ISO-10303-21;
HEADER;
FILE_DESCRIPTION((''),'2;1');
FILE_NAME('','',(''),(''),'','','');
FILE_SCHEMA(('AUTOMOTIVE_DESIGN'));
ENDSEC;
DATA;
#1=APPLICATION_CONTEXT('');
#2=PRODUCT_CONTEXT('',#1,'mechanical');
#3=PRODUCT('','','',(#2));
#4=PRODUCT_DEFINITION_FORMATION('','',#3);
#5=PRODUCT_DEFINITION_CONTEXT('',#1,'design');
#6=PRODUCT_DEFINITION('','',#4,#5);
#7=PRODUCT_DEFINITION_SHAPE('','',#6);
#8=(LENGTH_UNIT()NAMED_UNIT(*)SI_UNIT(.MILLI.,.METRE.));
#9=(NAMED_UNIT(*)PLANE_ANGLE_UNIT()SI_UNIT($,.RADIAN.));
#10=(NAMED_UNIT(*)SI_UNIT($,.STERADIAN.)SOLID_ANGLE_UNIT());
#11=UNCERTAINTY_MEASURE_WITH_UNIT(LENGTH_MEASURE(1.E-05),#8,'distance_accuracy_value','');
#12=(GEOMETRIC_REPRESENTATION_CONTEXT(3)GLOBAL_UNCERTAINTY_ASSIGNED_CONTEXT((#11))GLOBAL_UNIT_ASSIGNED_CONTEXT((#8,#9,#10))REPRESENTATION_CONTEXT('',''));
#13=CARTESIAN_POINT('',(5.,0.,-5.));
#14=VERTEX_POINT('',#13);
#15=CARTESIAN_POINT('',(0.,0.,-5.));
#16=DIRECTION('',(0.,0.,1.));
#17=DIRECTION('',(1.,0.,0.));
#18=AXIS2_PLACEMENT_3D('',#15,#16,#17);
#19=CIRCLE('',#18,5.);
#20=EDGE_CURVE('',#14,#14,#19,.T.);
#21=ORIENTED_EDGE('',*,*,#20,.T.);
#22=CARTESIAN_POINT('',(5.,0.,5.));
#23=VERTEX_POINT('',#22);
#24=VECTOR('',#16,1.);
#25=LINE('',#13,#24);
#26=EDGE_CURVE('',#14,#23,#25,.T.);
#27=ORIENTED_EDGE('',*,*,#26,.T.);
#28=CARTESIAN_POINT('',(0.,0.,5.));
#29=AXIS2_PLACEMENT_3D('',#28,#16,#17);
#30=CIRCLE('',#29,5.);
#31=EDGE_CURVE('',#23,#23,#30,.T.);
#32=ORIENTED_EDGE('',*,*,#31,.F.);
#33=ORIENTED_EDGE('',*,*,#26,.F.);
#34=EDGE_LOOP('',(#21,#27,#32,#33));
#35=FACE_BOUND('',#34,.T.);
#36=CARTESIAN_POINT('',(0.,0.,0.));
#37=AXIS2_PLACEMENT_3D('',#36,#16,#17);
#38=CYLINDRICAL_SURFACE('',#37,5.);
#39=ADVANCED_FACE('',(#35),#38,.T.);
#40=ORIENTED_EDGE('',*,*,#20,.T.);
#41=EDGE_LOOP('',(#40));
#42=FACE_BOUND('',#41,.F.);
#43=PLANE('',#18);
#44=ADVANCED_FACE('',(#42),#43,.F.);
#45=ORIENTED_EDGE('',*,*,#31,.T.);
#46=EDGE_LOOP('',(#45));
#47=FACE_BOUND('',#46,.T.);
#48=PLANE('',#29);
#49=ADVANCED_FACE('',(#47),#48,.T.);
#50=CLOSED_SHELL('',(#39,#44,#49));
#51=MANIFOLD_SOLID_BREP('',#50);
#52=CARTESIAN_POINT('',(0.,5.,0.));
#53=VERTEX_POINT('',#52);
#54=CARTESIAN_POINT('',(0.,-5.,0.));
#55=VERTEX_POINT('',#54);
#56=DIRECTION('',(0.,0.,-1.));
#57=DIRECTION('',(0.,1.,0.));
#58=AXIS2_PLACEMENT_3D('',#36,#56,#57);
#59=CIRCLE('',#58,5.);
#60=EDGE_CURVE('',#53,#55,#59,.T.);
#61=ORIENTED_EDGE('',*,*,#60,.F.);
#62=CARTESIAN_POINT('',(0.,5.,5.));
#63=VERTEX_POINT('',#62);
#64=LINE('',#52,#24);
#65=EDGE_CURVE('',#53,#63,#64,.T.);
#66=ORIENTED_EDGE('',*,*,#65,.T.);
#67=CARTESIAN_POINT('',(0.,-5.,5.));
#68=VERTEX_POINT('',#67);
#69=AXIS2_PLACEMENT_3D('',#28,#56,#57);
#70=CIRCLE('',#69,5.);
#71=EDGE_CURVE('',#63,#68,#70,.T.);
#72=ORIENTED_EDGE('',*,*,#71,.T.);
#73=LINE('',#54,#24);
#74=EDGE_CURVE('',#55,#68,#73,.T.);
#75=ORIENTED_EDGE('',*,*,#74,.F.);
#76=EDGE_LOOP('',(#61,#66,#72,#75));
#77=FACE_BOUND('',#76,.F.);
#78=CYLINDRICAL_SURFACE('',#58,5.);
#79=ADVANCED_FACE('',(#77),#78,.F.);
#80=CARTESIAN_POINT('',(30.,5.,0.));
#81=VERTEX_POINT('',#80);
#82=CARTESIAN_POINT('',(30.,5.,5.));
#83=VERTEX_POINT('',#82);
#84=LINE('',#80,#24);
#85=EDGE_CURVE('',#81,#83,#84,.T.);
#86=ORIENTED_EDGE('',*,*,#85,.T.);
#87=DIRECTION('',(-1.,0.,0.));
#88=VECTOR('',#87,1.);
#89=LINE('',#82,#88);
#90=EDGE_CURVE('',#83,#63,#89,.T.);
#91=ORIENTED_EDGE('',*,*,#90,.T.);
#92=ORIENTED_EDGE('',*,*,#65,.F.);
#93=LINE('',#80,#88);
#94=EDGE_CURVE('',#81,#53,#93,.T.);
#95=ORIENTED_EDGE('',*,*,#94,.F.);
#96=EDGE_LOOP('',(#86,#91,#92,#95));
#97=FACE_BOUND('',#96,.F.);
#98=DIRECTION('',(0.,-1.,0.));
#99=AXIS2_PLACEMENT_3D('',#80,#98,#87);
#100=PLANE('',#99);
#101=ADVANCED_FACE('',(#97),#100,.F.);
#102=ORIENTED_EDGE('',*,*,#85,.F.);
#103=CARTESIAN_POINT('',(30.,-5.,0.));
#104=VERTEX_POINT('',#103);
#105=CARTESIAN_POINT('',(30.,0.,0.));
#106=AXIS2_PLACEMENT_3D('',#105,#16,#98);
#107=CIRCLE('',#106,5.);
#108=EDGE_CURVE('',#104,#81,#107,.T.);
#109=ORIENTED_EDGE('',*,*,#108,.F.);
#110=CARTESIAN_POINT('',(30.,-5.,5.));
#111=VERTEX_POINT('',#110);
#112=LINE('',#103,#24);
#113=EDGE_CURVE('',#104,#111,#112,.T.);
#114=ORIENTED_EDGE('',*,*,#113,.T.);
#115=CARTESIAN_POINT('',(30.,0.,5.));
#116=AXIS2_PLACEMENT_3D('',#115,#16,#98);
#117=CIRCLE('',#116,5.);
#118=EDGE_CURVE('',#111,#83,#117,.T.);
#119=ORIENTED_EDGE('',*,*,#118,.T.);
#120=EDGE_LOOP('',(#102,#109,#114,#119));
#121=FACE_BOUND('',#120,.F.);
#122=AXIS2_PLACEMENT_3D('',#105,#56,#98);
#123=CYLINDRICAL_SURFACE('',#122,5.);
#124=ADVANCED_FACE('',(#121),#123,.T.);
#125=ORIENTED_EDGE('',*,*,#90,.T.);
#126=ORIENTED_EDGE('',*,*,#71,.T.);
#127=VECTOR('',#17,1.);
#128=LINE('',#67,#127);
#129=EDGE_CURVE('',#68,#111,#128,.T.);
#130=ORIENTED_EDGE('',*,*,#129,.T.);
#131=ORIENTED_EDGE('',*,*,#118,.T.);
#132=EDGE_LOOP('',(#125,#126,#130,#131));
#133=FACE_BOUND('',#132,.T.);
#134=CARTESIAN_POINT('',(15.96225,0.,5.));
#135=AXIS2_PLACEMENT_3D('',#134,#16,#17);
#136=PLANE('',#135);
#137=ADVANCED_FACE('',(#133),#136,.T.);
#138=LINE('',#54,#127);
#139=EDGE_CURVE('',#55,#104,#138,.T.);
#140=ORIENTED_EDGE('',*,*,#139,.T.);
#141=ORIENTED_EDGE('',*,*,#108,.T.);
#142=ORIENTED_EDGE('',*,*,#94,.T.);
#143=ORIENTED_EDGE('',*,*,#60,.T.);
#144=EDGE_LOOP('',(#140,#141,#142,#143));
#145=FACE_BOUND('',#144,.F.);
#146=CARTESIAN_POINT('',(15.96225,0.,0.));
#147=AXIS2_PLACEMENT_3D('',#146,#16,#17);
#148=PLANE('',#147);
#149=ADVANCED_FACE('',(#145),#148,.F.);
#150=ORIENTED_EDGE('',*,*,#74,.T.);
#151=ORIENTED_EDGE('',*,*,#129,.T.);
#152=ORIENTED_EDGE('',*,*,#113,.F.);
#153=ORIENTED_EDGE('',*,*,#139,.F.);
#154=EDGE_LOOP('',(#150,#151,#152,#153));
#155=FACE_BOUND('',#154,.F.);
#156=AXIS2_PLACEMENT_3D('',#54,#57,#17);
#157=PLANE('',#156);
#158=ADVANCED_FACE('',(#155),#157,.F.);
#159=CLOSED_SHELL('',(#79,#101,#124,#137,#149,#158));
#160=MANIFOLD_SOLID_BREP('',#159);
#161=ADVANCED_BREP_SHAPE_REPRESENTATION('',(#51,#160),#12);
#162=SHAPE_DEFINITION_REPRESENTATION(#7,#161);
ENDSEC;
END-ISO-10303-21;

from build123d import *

# Parameters (mm, degrees)
F0_R     = 5
F2_DEPTH = 5
F3_DEPTH = 5


with BuildPart() as f2:
    # F0 (on Top) → F2 (new body)
    with BuildSketch(Plane.XY):
        Circle(F0_R)
    extrude(amount=F2_DEPTH)

    # F3 (add): a face of the model
    f3_faces = [f2.faces().sort_by_distance(p)[0] for p in [
        (0, 0, 0),
    ]]
    extrude(f3_faces, amount=F3_DEPTH)


with BuildPart() as f2b:
    # F1 (on Top) → F2, piece 2 (new body)
    with BuildSketch(Plane.XY):
        with BuildLine():
            Line((30, 5), (0, 5))
            ThreePointArc((0, 5), (5, 0), (0, -5))
            Line((0, -5), (30, -5))
            ThreePointArc((30, -5), (35, 0), (30, 5))
        make_face()
    extrude(amount=F2_DEPTH)


solid = Compound([f2.part, f2b.part])
